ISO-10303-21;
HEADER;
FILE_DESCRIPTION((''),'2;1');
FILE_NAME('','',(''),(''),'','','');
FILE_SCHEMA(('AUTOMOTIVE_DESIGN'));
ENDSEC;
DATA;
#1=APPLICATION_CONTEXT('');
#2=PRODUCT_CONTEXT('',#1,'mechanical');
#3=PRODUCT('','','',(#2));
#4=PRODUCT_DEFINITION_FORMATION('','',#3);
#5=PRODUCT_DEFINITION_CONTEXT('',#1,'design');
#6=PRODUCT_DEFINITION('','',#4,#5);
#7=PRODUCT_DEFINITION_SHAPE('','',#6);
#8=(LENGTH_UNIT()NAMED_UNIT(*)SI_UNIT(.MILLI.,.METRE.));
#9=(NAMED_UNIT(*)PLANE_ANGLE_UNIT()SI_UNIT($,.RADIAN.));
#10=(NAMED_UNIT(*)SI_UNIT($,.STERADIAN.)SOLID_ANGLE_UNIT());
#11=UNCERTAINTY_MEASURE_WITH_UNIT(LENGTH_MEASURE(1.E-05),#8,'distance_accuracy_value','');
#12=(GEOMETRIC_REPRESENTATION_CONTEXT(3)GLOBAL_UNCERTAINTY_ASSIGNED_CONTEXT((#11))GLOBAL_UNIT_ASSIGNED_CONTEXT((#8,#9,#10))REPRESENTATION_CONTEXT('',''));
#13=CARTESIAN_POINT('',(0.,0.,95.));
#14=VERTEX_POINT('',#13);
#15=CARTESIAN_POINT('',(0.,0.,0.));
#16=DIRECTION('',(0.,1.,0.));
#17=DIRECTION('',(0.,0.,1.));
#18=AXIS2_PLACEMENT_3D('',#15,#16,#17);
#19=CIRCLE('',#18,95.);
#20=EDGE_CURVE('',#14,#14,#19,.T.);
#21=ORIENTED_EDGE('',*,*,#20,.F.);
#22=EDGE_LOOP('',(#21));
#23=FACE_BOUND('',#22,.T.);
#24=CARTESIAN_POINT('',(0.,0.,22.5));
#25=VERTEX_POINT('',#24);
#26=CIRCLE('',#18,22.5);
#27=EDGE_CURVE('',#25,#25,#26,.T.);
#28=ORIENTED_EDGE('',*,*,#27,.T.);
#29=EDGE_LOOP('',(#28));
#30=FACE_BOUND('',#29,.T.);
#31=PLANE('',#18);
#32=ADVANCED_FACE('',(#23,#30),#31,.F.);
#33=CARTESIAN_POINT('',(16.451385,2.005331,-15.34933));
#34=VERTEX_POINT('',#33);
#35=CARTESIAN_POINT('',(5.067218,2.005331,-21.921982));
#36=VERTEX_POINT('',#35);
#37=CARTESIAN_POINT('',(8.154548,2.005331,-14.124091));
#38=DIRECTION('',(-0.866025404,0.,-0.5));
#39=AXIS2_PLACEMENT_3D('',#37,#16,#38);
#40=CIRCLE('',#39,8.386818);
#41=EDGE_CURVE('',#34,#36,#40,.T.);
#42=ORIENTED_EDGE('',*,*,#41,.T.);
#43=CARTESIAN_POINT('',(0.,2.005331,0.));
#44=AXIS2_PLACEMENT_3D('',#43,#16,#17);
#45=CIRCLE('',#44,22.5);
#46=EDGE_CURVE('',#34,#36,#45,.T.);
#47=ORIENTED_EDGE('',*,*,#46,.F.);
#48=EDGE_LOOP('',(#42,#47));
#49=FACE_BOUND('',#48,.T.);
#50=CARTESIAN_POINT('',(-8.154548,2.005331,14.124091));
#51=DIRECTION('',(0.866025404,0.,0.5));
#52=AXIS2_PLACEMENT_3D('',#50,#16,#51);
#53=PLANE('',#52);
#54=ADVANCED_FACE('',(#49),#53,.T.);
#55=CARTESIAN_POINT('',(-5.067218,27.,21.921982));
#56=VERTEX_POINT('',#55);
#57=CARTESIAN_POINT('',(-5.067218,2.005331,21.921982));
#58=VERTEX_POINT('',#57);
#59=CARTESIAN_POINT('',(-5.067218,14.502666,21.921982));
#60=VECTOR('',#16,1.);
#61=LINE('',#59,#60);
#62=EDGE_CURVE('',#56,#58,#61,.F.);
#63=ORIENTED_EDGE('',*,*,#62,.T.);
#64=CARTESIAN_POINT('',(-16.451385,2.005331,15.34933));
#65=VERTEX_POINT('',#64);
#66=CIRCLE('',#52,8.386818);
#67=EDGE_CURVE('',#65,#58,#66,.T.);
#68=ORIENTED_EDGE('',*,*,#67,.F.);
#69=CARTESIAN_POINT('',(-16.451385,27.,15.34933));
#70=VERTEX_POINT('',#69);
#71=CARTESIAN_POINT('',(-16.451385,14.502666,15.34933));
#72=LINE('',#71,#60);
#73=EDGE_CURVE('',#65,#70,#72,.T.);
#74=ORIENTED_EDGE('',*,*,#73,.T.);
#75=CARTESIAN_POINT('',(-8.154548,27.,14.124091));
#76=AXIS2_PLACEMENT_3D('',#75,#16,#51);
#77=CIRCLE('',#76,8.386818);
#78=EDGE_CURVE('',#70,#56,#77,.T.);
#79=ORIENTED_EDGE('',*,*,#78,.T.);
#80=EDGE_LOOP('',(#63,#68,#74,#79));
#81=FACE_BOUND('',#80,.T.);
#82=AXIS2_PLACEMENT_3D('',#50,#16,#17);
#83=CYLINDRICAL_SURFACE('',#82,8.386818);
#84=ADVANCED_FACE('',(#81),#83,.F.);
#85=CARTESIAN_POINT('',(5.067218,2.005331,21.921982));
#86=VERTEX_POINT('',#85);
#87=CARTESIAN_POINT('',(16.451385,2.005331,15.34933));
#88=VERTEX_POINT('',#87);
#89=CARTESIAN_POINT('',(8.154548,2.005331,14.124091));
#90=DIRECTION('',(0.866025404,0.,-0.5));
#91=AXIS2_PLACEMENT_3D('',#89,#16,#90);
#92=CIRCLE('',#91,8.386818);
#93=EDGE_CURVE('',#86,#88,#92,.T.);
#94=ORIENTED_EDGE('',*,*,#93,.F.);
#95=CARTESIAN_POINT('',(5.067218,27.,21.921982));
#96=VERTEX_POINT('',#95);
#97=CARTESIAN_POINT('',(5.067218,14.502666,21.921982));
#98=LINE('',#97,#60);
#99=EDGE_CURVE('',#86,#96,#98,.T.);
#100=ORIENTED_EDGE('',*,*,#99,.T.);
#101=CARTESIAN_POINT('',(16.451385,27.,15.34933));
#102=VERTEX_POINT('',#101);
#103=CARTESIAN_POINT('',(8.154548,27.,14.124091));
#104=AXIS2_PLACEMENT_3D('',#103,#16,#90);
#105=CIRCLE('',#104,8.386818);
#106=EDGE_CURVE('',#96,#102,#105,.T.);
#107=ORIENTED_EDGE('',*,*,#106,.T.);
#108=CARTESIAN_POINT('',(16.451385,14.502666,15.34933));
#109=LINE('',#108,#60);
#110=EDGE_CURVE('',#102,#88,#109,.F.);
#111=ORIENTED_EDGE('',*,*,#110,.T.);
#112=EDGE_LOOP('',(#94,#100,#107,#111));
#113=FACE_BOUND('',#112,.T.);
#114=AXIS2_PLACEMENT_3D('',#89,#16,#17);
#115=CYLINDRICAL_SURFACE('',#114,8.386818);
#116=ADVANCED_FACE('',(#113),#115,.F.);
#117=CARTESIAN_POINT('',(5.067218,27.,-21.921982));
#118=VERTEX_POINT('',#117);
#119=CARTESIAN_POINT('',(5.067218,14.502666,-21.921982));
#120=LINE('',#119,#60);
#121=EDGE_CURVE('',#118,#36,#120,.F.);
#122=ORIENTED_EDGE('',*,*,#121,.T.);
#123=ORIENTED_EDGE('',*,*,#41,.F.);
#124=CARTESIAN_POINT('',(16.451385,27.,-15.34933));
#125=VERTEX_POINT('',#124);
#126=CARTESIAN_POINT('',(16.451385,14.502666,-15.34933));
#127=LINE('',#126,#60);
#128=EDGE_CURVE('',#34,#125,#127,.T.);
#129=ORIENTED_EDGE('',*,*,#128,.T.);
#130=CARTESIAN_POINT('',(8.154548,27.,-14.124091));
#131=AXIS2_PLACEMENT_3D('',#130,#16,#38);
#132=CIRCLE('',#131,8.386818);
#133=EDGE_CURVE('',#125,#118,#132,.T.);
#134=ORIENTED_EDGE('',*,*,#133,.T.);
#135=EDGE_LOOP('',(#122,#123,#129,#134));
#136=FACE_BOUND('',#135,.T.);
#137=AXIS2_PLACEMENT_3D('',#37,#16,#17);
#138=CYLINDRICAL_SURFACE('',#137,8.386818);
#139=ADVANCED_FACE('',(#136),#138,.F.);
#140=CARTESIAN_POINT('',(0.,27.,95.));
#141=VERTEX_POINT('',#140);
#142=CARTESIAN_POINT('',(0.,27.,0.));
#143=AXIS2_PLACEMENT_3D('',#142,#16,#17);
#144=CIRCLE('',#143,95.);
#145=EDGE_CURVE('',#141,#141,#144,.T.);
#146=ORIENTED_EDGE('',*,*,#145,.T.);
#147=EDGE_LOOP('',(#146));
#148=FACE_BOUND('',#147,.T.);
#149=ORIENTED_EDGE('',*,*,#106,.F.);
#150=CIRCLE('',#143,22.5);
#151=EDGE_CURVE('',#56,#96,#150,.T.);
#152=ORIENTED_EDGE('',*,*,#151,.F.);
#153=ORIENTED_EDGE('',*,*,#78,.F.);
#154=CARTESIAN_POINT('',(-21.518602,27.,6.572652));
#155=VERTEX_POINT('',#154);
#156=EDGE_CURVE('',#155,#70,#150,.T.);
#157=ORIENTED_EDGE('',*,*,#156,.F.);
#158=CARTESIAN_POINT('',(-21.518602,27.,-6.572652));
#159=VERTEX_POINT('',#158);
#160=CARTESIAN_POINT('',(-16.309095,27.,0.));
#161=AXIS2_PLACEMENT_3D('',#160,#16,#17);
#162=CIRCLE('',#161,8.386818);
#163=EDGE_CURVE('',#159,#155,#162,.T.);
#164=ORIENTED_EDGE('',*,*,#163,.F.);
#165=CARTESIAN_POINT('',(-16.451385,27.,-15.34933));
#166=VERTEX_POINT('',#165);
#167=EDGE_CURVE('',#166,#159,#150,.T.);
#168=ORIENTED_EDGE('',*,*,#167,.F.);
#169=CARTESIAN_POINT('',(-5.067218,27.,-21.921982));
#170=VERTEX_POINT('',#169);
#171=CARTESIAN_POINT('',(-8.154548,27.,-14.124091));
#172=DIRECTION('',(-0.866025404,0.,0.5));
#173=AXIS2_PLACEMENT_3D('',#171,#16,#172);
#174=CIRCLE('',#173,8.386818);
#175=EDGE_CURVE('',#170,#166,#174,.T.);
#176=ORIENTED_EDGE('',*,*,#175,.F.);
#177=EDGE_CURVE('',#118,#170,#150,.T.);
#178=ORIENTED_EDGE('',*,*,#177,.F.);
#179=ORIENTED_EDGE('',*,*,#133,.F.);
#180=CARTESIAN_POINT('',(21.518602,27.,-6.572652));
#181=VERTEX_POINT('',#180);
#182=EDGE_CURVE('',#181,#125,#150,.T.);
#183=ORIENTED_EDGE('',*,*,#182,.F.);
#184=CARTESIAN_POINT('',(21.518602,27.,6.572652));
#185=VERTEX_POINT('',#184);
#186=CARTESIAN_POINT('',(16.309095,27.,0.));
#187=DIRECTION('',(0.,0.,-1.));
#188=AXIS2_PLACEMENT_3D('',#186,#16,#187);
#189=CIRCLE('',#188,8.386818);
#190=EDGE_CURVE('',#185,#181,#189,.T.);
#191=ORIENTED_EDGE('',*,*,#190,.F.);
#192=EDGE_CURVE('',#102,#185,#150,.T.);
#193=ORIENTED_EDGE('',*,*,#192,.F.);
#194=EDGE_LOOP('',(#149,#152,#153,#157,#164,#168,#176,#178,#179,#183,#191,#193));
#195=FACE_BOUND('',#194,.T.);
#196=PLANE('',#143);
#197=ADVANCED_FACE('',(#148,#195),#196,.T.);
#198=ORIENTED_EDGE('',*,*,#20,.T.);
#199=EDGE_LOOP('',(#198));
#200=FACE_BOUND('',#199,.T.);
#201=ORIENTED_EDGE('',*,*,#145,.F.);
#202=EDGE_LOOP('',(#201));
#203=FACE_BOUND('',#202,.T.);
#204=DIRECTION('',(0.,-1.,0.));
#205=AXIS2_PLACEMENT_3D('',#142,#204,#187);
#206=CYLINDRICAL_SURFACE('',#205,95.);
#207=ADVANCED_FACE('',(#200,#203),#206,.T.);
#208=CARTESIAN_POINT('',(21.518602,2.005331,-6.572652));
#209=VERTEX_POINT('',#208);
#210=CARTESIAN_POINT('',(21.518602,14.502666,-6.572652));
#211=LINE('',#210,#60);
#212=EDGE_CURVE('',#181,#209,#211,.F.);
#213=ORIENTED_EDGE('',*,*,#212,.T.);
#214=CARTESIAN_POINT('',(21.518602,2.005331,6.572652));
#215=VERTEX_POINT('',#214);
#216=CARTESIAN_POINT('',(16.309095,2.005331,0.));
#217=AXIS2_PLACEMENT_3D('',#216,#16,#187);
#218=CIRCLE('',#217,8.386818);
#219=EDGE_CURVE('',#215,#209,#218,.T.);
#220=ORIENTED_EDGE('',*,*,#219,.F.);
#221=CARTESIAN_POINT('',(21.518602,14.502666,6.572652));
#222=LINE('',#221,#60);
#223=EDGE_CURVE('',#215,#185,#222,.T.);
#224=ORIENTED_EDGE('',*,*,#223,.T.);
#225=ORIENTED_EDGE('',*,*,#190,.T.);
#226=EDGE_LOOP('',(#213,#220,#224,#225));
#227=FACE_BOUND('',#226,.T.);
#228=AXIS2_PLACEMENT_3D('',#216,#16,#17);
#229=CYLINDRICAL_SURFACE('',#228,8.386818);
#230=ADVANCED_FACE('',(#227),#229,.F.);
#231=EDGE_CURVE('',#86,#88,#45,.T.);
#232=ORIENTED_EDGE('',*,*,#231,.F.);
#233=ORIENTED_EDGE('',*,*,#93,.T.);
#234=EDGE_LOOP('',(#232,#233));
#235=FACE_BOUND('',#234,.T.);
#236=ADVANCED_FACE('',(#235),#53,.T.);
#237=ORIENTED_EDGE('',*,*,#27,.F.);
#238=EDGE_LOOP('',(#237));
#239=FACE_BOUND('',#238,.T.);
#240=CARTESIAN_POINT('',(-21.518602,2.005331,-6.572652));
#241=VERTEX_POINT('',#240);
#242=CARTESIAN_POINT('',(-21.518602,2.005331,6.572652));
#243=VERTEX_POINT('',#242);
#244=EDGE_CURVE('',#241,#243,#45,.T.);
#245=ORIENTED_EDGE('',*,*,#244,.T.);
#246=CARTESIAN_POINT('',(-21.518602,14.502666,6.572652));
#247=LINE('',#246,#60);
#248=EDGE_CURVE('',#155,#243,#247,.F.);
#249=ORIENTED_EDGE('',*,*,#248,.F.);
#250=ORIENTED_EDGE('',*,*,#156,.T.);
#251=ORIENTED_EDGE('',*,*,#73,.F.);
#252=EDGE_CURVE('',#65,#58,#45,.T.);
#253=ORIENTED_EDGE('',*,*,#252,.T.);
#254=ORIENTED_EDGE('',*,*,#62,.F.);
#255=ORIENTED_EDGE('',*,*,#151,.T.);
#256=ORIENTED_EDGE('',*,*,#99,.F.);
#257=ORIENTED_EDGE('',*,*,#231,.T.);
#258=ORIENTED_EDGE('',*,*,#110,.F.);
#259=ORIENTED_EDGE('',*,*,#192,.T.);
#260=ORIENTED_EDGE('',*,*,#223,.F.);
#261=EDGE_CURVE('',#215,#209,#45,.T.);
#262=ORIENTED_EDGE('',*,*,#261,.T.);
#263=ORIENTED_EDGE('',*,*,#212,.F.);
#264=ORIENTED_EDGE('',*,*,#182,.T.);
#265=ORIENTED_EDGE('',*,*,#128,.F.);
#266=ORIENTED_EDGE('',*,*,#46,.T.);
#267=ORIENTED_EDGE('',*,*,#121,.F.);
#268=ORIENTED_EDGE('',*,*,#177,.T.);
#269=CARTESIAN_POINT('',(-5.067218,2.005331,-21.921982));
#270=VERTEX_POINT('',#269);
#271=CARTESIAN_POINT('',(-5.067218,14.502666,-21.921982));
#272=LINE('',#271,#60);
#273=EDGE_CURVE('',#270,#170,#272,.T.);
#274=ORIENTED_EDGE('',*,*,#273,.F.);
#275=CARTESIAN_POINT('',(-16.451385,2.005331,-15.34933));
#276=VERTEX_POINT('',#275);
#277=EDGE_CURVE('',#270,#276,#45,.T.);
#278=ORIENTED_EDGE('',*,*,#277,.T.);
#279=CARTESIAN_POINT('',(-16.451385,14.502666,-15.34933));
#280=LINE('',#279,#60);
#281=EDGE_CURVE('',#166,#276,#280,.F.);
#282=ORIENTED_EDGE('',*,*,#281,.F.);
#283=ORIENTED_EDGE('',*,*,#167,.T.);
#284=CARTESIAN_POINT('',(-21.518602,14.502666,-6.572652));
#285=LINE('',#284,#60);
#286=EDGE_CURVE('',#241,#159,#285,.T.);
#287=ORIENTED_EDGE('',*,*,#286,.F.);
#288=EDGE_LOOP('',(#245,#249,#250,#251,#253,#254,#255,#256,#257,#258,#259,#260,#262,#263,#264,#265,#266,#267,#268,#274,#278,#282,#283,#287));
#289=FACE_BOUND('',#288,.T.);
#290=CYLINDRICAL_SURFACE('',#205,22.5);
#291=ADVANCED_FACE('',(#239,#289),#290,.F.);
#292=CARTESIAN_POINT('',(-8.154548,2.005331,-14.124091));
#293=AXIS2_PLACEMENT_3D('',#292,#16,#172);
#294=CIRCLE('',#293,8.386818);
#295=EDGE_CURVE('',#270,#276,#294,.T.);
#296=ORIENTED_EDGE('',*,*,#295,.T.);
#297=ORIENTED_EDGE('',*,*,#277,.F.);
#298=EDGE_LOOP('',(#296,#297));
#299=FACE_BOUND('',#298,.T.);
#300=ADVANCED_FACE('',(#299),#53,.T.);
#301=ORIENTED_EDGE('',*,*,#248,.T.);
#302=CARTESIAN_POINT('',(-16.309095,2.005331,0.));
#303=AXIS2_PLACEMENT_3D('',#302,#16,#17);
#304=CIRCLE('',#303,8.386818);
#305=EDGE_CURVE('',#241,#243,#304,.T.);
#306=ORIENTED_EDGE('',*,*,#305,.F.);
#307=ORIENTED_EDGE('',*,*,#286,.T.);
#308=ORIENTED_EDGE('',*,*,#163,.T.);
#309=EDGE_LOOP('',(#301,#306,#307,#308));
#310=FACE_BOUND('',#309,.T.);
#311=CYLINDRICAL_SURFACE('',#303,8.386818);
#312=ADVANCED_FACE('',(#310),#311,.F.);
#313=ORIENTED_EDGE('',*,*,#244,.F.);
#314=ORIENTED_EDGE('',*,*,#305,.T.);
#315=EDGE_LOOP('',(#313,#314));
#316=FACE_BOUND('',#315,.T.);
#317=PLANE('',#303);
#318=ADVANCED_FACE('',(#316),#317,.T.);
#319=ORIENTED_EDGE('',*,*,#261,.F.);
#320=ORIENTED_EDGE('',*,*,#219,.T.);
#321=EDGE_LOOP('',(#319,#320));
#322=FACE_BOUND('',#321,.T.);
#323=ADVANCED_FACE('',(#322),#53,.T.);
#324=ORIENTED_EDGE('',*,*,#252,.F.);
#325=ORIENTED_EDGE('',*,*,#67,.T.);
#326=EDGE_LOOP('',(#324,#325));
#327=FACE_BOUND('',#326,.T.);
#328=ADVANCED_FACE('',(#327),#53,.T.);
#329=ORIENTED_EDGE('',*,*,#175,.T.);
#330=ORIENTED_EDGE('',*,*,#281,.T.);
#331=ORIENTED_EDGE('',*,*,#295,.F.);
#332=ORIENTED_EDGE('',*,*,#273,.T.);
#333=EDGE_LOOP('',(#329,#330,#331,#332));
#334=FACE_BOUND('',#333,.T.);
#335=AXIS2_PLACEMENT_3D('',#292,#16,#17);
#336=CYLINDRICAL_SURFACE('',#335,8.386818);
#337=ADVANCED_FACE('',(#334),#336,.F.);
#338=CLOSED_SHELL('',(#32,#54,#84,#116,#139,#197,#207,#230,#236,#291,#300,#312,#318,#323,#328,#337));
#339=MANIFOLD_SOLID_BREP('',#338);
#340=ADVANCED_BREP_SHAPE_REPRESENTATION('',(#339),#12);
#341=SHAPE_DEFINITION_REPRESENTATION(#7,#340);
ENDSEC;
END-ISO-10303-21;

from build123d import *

# Parameters (mm, degrees)
SKETCH1_R           = 95
BOSS_EXTRUDE1_DEPTH = 27
SKETCH2_R           = 22.5
CUT_EXTRUDE1_DEPTH  = 138.03649149
SKETCH3_R           = 8.386818152
CUT_EXTRUDE2_DEPTH  = 24.99466896
CIRPATTERN1_COUNT   = 6


with BuildPart() as part:
    # Sketch1 → Boss-Extrude1 (new body)
    with BuildSketch(Plane(origin=(0, 0, 0), x_dir=(1, 0, 0), z_dir=(0, 1, 0))):
        Circle(SKETCH1_R)
    extrude(amount=BOSS_EXTRUDE1_DEPTH)

    # Sketch2 → Cut-Extrude1 (cut, through all)
    with BuildSketch(Plane(origin=(0, 0, 0), x_dir=(1, 0, 0), z_dir=(0, 1, 0))):
        Circle(SKETCH2_R)
    extrude(amount=CUT_EXTRUDE1_DEPTH, mode=Mode.SUBTRACT)

    # Sketch3 → Cut-Extrude2 (cut)
    with BuildSketch(Plane(origin=(0, 27, 0), x_dir=(1, 0, 0), z_dir=(0, 1, 0))):
        with Locations((-16.30909516, 0)):
            Circle(SKETCH3_R)
    cut_extrude2 = extrude(amount=-CUT_EXTRUDE2_DEPTH, mode=Mode.SUBTRACT)

    # CirPattern1: Cut-Extrude2 ×6 about axis
    cirpattern1_axis = Axis((0, 0, 0), (0, 1, 0))
    for i in range(1, CIRPATTERN1_COUNT):
        add(cut_extrude2.rotate(cirpattern1_axis, i * 360 / CIRPATTERN1_COUNT), mode=Mode.SUBTRACT)


solid = part.part
